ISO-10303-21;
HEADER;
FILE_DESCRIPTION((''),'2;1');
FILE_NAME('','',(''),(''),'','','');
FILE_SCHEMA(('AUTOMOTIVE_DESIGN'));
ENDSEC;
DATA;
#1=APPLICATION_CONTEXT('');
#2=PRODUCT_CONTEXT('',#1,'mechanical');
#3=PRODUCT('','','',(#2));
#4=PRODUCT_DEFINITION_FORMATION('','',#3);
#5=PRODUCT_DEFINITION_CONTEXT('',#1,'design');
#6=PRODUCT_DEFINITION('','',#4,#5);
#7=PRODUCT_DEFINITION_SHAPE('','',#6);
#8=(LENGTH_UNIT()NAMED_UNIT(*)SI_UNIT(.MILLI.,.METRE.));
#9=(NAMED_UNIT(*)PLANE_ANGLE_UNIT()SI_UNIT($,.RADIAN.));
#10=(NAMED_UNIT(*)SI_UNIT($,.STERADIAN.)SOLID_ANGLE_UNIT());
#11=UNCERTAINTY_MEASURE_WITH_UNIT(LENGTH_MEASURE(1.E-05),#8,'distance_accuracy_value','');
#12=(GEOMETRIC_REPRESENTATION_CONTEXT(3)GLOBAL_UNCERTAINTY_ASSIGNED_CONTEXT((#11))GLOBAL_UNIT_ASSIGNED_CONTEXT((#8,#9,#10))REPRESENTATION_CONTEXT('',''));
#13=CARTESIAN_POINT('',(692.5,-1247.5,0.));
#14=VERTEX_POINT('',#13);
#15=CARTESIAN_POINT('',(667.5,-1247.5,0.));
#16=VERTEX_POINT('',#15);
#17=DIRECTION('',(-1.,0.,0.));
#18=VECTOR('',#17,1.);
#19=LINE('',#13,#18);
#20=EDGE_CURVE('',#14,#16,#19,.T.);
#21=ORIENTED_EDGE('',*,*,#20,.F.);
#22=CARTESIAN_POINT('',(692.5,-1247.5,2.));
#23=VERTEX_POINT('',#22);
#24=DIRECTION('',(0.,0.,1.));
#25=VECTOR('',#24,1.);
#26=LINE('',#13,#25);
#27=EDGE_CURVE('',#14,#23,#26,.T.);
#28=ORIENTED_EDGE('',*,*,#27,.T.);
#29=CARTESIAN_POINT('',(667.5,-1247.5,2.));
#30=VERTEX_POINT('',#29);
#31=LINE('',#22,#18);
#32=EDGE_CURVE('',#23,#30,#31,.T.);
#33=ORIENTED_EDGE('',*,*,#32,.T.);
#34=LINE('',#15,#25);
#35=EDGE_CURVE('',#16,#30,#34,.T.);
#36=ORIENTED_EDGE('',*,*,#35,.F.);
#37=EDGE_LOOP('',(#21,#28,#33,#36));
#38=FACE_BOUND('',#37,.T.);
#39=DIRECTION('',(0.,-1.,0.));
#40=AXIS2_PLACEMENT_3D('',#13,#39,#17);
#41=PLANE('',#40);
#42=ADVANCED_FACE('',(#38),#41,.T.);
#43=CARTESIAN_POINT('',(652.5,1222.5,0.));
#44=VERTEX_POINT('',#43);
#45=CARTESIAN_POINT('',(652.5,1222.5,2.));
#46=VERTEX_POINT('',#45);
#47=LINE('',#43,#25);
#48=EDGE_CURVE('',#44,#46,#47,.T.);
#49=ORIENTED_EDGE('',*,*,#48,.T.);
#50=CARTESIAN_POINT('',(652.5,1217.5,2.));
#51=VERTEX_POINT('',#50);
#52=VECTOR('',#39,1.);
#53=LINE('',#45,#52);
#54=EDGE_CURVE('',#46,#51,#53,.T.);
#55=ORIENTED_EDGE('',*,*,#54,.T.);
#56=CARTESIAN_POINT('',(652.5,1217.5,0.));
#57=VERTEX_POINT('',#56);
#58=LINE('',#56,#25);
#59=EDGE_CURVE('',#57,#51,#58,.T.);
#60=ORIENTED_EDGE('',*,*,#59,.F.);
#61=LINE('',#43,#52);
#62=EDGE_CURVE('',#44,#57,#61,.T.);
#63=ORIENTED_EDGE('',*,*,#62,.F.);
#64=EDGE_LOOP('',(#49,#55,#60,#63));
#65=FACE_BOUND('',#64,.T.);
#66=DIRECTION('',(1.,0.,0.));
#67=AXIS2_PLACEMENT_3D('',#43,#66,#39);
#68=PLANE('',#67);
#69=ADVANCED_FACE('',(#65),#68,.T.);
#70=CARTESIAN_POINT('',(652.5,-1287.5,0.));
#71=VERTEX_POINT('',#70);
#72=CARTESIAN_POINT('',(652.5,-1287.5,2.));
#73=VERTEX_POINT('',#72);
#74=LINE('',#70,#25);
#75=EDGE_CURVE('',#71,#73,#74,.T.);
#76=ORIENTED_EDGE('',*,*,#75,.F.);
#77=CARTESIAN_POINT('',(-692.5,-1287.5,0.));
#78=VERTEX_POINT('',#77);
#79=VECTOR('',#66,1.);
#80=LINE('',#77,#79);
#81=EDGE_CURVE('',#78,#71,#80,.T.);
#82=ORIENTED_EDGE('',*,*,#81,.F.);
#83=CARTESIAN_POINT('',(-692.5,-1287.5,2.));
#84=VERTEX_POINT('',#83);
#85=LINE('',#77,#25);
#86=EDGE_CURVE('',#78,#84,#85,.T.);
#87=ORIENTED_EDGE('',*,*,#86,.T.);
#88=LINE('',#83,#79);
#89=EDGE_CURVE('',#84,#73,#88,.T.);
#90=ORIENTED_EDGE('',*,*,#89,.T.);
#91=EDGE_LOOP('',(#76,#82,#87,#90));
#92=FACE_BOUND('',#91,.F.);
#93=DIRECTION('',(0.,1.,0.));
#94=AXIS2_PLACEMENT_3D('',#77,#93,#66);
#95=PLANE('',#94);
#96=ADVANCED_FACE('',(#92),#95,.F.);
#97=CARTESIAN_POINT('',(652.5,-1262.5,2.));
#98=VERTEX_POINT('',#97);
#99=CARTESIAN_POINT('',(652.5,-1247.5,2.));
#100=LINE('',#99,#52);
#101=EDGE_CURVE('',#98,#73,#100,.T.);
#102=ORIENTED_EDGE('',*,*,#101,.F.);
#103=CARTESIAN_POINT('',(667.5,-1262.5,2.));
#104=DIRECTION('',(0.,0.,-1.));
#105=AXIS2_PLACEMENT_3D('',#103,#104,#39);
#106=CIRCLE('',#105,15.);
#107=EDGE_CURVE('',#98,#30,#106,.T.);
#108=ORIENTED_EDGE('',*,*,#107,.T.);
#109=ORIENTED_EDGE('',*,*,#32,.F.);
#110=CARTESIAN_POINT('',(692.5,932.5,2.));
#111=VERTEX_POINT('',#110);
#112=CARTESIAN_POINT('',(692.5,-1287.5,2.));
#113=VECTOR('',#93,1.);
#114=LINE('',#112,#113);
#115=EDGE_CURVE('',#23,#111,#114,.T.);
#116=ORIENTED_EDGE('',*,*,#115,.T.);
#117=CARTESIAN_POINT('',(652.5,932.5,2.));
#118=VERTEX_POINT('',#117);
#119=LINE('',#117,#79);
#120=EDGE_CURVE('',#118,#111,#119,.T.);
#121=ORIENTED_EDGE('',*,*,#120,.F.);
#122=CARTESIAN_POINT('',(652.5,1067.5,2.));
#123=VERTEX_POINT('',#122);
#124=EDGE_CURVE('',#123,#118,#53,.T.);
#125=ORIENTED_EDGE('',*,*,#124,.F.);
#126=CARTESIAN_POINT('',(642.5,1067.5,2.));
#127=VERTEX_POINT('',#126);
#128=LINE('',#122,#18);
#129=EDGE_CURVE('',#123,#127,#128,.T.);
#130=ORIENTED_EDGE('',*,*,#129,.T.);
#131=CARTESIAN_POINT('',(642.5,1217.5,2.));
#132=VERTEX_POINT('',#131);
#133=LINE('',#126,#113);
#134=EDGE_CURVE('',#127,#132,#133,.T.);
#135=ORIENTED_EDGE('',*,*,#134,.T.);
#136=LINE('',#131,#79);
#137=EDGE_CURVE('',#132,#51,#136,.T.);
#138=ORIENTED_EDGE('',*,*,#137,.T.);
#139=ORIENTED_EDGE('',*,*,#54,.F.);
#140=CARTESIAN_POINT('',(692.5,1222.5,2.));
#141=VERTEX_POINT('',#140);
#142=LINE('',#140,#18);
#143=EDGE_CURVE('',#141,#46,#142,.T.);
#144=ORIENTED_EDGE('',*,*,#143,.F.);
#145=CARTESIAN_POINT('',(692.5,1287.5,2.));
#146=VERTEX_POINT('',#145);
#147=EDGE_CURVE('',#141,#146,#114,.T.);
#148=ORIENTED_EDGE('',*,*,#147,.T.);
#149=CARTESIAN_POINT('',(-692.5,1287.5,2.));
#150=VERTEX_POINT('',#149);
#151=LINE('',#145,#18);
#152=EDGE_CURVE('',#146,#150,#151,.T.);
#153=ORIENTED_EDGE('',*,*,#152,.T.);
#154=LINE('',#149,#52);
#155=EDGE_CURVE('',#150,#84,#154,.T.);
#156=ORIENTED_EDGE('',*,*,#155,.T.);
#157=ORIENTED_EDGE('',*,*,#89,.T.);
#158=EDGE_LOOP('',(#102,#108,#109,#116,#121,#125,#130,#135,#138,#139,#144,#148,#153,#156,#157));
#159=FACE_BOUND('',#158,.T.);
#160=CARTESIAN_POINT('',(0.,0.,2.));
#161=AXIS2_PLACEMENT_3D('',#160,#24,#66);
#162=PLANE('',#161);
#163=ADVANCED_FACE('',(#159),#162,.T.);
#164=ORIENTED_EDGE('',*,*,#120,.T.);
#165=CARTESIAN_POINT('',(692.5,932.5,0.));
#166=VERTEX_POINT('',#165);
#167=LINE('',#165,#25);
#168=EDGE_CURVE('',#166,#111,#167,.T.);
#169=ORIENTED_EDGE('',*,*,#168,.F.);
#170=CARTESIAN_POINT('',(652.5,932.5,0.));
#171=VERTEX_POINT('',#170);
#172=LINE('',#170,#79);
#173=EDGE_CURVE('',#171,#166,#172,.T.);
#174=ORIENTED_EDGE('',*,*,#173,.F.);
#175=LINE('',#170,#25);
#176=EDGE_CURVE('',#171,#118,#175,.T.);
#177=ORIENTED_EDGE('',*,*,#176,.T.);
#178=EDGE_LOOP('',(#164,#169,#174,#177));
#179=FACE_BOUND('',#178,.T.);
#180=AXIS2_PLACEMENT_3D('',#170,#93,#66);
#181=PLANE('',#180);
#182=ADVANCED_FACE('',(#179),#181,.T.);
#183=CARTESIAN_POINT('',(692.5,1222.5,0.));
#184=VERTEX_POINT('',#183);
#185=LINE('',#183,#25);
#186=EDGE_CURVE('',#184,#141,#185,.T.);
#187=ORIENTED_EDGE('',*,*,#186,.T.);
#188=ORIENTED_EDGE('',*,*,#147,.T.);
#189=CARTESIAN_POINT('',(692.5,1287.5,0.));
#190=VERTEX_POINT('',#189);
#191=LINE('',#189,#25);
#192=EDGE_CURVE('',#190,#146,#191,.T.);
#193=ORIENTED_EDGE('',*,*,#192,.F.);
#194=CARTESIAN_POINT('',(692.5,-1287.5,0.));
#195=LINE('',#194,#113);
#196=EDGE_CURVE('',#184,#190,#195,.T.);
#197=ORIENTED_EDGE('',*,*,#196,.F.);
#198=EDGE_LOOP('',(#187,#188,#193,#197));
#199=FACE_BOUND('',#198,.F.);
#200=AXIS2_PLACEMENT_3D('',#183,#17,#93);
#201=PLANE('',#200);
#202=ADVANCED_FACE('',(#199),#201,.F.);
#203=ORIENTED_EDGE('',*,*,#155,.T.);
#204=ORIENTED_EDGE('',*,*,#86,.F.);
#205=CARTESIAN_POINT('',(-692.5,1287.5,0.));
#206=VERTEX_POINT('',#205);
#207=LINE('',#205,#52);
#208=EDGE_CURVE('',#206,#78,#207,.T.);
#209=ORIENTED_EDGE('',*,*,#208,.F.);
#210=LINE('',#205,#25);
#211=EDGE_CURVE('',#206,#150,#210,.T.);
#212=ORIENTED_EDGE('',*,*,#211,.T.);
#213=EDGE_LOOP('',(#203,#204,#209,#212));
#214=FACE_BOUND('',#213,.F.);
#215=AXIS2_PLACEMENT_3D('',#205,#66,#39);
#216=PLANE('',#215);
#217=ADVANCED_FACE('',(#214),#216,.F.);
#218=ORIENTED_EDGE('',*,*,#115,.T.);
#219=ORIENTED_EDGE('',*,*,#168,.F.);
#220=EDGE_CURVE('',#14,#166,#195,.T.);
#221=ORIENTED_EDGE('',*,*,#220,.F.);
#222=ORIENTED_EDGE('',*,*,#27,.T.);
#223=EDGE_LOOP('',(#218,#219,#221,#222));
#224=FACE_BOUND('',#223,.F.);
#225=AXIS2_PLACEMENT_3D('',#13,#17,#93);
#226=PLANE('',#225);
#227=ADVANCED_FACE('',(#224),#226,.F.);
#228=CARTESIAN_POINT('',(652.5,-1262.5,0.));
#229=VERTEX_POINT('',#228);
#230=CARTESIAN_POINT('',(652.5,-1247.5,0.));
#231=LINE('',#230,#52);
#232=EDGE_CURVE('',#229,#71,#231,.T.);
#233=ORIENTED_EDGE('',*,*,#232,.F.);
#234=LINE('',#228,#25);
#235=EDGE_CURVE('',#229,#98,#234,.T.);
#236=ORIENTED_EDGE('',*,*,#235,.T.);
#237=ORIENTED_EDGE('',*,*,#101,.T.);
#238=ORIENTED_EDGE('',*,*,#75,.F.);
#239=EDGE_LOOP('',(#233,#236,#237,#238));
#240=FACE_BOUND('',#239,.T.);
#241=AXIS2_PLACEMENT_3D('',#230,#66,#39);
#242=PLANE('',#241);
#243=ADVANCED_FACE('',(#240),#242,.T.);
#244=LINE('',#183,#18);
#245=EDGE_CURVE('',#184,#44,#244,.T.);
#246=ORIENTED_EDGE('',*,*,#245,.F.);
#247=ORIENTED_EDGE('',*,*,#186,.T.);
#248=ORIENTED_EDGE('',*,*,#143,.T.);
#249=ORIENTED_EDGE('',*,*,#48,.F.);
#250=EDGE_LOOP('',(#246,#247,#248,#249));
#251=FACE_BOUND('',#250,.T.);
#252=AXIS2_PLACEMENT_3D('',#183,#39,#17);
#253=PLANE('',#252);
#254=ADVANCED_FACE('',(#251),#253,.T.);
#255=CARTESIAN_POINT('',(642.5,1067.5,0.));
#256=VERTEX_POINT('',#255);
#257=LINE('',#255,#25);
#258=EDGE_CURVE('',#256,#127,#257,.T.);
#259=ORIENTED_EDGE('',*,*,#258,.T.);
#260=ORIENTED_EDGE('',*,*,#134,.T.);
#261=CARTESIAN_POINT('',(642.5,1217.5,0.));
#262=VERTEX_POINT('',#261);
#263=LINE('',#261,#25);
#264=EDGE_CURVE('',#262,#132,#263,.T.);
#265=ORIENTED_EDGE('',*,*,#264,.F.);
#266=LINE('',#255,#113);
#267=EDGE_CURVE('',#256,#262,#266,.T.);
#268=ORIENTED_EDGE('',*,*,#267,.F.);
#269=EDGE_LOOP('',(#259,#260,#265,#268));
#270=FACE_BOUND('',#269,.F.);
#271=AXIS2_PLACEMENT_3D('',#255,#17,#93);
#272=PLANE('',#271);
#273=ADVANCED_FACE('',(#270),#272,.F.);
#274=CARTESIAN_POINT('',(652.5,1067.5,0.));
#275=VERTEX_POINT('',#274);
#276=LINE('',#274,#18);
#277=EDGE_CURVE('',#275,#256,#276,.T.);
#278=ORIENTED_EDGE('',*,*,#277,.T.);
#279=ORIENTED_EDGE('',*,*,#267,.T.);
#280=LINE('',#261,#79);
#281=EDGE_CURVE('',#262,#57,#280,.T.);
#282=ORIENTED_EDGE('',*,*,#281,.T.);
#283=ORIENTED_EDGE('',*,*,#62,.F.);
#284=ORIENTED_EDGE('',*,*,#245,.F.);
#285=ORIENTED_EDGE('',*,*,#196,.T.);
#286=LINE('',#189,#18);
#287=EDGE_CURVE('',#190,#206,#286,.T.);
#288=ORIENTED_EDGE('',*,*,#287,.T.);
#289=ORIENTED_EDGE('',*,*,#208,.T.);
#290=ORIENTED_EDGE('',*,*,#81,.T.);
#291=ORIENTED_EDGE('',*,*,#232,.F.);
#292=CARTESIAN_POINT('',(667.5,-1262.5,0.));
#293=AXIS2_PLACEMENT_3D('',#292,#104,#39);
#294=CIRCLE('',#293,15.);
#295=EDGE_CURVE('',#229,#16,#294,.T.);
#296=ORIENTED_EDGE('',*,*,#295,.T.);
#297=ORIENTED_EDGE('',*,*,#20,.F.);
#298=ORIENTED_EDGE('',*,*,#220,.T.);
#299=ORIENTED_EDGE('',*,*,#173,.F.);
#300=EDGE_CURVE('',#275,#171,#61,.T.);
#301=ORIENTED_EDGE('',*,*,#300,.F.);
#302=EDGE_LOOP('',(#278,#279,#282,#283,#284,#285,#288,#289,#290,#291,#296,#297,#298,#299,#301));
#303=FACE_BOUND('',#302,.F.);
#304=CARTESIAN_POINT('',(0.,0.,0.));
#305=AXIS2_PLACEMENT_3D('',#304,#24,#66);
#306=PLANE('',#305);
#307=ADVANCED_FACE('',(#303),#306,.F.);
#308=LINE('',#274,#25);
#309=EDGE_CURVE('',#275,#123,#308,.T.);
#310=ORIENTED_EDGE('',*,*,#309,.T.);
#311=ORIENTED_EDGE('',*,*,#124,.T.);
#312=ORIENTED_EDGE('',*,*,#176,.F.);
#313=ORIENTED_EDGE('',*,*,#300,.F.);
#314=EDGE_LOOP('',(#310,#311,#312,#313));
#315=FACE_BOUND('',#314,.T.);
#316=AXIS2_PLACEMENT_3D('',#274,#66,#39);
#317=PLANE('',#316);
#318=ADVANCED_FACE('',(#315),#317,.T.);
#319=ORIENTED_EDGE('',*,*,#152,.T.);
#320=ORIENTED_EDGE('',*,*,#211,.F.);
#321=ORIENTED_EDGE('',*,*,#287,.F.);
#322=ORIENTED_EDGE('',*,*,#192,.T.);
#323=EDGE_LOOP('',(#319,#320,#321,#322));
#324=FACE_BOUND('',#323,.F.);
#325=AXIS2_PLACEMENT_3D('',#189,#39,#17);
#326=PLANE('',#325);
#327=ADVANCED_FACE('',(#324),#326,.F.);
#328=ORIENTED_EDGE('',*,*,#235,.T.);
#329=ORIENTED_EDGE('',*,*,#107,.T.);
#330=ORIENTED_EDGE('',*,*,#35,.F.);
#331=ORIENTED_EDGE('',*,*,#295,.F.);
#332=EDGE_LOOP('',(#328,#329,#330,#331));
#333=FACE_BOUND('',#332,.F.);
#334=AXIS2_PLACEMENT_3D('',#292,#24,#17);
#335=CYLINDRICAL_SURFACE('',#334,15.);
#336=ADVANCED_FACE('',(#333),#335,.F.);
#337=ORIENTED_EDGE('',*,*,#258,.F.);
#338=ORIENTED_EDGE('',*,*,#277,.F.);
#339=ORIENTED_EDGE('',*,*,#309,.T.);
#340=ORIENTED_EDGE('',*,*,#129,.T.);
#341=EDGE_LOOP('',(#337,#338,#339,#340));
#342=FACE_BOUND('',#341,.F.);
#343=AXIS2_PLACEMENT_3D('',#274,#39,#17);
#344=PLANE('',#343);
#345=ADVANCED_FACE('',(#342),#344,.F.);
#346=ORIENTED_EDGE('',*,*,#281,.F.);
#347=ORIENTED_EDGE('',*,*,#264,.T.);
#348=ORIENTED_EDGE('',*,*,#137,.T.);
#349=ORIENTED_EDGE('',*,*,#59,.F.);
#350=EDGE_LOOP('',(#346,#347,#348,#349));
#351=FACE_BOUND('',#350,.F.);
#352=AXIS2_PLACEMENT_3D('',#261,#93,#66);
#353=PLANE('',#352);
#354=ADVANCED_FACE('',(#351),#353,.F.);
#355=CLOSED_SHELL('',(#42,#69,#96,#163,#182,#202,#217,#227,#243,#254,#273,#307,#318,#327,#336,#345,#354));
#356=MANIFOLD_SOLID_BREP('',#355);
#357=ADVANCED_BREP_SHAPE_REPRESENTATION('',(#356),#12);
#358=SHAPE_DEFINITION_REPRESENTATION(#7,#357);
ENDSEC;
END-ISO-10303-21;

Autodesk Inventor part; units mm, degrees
ref_plane "YZ Plane" through (0, 0, 0) normal (1, 0, 0) x (0, 1, 0)
ref_plane "XZ Plane" through (0, 0, 0) normal (0, 1, 0) x (-1, 0, 0)
ref_plane "XY Plane" through (0, 0, 0) normal (0, 0, 1) x (1, 0, 0)
sketch "Sketch1" plane through (0, 0, 0) normal (0, 0, 1) x (1, 0, 0)
  line L0 (-692.5, -1287.5) -> (692.5, -1287.5)
  line L1 (692.5, -1287.5) -> (692.5, 1287.5)
  line L2 (692.5, 1287.5) -> (-692.5, 1287.5)
  line L3 (-692.5, 1287.5) -> (-692.5, -1287.5)
  line L4 (-692.5, -1287.5) -> (692.5, 1287.5) construction
  line L5 (692.5, -1287.5) -> (-692.5, 1287.5) construction
  line L6 (692.5, -1247.5) -> (652.5, -1247.5)
  line L7 (652.5, -1247.5) -> (652.5, -1287.5)
  line L8 (692.5, 1222.5) -> (652.5, 1222.5)
  line L9 (652.5, 1222.5) -> (652.5, 932.5)
  line L10 (652.5, 932.5) -> (692.5, 932.5)
  line L11 (692.5, 932.5) -> (692.5, 1222.5)
  line L12 (652.5, 1067.5) -> (642.5, 1067.5)
  line L13 (642.5, 1067.5) -> (642.5, 1217.5)
  line L14 (642.5, 1217.5) -> (652.5, 1217.5)
  line L15 (-572.5, -767.5) -> (17.5, -767.5)
  line L16 (17.5, -767.5) -> (17.5, -177.5)
  line L17 (17.5, -177.5) -> (-572.5, -177.5)
  line L18 (-572.5, -177.5) -> (-572.5, -767.5)
  point P0 (0, 0)
  dimension "d154" = 1385
  dimension "d155" = 2575
  dimension "d157" = 40
  dimension "d159" = 290
  dimension "d161" = 40
  dimension "d162" = 2220
  dimension "d163" = 10
  dimension "d164" = 150
  dimension "d165" = 5
  dimension "d166" = 590
  dimension "d167" = 590
  dimension "d168" = 675
  dimension "d169" = 520
extrude "Plate5" add sketch "Sketch1" along normal blind 2 contours L3 L2 L1 L8 L9 L14 L13 L12 L10 L6 L7 L0 | L18 L17 L16 L15
fillet "Corner Round1" radius 15 1 edges at (652.5, -1247.5, 1)
properties part number "PNS-0111 floor sheet 2_CPY" material "Stainless Steel"
